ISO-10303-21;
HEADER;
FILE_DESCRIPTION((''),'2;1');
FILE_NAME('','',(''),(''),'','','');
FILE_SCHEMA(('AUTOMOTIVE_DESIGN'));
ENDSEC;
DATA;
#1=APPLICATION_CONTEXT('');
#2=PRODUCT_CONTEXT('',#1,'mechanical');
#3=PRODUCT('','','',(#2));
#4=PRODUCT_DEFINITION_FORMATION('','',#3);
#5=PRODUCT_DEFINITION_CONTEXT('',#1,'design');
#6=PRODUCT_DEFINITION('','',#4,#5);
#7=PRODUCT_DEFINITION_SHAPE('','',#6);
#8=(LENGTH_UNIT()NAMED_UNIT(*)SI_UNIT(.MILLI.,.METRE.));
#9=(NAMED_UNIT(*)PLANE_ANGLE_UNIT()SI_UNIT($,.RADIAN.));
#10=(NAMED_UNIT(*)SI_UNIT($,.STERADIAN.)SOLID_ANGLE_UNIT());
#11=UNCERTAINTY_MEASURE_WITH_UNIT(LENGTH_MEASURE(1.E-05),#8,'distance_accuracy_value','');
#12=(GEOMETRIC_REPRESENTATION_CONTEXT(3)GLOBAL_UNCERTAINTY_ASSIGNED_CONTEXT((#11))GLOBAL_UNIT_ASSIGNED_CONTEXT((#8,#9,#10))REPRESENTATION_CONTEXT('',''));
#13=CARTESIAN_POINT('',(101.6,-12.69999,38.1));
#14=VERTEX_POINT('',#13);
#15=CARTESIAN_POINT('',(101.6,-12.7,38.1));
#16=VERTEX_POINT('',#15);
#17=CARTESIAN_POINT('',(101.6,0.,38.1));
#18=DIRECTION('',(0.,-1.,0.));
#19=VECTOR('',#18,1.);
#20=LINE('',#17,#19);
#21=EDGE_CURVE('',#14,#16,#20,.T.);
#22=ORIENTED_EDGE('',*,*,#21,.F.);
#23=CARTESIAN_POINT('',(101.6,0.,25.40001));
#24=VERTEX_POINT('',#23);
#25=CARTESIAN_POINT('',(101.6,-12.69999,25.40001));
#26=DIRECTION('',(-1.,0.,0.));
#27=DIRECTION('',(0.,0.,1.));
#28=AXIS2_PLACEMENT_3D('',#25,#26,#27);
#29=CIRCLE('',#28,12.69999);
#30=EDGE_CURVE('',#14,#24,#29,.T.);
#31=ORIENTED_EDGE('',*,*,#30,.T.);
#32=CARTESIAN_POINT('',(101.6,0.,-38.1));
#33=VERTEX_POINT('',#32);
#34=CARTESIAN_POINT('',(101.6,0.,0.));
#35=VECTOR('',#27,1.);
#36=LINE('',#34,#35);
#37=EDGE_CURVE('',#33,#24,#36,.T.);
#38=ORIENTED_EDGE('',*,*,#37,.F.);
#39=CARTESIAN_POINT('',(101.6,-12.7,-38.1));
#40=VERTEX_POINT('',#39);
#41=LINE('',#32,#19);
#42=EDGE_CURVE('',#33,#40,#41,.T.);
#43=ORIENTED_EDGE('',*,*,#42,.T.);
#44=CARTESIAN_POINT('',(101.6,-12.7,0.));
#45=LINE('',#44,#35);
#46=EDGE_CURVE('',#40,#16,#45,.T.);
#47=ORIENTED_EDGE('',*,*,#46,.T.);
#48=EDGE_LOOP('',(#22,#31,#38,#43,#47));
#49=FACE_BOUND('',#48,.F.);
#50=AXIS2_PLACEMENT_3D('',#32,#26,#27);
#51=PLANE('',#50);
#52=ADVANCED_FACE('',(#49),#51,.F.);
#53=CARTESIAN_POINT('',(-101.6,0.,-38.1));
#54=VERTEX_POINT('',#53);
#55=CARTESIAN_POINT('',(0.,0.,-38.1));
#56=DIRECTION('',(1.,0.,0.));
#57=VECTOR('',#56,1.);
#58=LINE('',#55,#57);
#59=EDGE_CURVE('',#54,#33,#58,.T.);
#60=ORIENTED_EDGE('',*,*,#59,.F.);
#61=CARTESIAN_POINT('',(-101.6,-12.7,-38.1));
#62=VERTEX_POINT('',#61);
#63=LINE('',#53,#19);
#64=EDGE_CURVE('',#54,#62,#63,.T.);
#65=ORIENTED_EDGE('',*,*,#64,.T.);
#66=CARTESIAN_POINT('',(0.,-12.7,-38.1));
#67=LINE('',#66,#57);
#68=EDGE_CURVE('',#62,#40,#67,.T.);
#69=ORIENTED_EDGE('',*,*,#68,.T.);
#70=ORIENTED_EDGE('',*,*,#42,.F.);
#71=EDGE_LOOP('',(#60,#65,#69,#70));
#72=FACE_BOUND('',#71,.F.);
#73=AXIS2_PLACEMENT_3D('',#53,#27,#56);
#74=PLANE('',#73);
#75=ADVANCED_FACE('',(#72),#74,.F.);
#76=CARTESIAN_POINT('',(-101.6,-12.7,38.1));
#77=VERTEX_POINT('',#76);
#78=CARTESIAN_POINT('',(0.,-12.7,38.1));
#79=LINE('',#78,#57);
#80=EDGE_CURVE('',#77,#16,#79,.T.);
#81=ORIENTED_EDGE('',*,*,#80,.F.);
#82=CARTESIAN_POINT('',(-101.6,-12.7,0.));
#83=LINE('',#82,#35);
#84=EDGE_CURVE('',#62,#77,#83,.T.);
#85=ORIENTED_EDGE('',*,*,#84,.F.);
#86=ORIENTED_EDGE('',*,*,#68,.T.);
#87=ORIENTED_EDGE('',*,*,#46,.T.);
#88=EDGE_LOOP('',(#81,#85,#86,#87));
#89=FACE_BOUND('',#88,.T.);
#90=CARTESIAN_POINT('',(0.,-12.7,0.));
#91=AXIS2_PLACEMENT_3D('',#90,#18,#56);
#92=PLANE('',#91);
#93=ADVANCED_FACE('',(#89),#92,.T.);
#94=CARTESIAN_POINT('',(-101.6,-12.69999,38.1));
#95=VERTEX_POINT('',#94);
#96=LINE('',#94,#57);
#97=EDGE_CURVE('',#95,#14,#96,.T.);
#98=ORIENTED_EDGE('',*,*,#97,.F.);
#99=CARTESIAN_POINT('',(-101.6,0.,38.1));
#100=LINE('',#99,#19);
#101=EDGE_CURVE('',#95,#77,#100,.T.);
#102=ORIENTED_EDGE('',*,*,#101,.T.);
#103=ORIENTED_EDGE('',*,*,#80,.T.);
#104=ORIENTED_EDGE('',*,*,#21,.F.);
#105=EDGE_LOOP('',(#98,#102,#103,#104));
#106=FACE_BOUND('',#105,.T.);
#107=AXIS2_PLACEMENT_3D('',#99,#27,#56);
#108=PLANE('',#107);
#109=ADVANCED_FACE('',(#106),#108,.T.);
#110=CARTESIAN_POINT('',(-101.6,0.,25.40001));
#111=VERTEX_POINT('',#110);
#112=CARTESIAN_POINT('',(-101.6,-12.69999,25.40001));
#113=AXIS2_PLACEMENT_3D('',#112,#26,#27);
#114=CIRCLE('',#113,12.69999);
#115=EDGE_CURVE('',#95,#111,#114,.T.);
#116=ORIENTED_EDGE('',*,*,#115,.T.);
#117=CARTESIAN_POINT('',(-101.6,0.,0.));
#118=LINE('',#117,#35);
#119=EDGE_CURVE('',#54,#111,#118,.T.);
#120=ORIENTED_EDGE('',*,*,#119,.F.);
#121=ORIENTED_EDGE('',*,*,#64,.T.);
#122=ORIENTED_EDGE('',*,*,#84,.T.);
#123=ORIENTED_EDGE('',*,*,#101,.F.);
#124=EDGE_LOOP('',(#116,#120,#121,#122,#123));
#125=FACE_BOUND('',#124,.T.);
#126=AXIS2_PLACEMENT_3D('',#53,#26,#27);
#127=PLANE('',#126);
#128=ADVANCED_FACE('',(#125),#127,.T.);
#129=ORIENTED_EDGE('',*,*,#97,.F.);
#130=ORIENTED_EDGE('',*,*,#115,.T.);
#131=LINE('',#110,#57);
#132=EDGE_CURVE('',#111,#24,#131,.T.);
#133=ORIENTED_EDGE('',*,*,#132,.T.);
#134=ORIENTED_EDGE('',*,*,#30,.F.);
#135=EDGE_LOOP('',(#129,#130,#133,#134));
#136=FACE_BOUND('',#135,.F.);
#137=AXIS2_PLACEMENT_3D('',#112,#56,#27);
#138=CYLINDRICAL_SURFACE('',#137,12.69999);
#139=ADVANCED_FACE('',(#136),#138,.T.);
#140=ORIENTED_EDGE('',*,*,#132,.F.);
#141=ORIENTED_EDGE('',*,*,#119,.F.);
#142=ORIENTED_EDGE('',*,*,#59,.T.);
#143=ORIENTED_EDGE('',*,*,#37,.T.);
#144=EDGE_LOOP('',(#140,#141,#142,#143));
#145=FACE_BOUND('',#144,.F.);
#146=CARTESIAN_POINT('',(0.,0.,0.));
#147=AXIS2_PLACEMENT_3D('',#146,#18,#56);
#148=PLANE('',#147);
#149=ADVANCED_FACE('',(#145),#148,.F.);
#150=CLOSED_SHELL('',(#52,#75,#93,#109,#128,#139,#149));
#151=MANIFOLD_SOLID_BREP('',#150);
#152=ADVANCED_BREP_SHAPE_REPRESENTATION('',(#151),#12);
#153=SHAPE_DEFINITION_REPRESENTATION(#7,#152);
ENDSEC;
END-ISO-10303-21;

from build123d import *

# Parameters (mm, degrees)
F0_W     = 203.2
F0_H     = 76.2
F1_DEPTH = 12.7
F2_R     = 12.69999


# Not quite as in the source:
# - a fillet or chamfer is up to 0.001 mm smaller than in the source, because OpenCascade refuses the exact size


with BuildPart() as f1:
    # F0 (on Front) → F1 (new body)
    with BuildSketch(Plane.XZ):
        Rectangle(F0_W, F0_H)
    extrude(amount=F1_DEPTH)

    # F2 (radius 12.7 in the source; OpenCascade refuses exactly that, so slightly less here)
    f2_edges = [f1.edges().sort_by_distance(p)[0] for p in [
        (0, 0, 38.1),
    ]]
    fillet(f2_edges, radius=F2_R)


solid = f1.part
